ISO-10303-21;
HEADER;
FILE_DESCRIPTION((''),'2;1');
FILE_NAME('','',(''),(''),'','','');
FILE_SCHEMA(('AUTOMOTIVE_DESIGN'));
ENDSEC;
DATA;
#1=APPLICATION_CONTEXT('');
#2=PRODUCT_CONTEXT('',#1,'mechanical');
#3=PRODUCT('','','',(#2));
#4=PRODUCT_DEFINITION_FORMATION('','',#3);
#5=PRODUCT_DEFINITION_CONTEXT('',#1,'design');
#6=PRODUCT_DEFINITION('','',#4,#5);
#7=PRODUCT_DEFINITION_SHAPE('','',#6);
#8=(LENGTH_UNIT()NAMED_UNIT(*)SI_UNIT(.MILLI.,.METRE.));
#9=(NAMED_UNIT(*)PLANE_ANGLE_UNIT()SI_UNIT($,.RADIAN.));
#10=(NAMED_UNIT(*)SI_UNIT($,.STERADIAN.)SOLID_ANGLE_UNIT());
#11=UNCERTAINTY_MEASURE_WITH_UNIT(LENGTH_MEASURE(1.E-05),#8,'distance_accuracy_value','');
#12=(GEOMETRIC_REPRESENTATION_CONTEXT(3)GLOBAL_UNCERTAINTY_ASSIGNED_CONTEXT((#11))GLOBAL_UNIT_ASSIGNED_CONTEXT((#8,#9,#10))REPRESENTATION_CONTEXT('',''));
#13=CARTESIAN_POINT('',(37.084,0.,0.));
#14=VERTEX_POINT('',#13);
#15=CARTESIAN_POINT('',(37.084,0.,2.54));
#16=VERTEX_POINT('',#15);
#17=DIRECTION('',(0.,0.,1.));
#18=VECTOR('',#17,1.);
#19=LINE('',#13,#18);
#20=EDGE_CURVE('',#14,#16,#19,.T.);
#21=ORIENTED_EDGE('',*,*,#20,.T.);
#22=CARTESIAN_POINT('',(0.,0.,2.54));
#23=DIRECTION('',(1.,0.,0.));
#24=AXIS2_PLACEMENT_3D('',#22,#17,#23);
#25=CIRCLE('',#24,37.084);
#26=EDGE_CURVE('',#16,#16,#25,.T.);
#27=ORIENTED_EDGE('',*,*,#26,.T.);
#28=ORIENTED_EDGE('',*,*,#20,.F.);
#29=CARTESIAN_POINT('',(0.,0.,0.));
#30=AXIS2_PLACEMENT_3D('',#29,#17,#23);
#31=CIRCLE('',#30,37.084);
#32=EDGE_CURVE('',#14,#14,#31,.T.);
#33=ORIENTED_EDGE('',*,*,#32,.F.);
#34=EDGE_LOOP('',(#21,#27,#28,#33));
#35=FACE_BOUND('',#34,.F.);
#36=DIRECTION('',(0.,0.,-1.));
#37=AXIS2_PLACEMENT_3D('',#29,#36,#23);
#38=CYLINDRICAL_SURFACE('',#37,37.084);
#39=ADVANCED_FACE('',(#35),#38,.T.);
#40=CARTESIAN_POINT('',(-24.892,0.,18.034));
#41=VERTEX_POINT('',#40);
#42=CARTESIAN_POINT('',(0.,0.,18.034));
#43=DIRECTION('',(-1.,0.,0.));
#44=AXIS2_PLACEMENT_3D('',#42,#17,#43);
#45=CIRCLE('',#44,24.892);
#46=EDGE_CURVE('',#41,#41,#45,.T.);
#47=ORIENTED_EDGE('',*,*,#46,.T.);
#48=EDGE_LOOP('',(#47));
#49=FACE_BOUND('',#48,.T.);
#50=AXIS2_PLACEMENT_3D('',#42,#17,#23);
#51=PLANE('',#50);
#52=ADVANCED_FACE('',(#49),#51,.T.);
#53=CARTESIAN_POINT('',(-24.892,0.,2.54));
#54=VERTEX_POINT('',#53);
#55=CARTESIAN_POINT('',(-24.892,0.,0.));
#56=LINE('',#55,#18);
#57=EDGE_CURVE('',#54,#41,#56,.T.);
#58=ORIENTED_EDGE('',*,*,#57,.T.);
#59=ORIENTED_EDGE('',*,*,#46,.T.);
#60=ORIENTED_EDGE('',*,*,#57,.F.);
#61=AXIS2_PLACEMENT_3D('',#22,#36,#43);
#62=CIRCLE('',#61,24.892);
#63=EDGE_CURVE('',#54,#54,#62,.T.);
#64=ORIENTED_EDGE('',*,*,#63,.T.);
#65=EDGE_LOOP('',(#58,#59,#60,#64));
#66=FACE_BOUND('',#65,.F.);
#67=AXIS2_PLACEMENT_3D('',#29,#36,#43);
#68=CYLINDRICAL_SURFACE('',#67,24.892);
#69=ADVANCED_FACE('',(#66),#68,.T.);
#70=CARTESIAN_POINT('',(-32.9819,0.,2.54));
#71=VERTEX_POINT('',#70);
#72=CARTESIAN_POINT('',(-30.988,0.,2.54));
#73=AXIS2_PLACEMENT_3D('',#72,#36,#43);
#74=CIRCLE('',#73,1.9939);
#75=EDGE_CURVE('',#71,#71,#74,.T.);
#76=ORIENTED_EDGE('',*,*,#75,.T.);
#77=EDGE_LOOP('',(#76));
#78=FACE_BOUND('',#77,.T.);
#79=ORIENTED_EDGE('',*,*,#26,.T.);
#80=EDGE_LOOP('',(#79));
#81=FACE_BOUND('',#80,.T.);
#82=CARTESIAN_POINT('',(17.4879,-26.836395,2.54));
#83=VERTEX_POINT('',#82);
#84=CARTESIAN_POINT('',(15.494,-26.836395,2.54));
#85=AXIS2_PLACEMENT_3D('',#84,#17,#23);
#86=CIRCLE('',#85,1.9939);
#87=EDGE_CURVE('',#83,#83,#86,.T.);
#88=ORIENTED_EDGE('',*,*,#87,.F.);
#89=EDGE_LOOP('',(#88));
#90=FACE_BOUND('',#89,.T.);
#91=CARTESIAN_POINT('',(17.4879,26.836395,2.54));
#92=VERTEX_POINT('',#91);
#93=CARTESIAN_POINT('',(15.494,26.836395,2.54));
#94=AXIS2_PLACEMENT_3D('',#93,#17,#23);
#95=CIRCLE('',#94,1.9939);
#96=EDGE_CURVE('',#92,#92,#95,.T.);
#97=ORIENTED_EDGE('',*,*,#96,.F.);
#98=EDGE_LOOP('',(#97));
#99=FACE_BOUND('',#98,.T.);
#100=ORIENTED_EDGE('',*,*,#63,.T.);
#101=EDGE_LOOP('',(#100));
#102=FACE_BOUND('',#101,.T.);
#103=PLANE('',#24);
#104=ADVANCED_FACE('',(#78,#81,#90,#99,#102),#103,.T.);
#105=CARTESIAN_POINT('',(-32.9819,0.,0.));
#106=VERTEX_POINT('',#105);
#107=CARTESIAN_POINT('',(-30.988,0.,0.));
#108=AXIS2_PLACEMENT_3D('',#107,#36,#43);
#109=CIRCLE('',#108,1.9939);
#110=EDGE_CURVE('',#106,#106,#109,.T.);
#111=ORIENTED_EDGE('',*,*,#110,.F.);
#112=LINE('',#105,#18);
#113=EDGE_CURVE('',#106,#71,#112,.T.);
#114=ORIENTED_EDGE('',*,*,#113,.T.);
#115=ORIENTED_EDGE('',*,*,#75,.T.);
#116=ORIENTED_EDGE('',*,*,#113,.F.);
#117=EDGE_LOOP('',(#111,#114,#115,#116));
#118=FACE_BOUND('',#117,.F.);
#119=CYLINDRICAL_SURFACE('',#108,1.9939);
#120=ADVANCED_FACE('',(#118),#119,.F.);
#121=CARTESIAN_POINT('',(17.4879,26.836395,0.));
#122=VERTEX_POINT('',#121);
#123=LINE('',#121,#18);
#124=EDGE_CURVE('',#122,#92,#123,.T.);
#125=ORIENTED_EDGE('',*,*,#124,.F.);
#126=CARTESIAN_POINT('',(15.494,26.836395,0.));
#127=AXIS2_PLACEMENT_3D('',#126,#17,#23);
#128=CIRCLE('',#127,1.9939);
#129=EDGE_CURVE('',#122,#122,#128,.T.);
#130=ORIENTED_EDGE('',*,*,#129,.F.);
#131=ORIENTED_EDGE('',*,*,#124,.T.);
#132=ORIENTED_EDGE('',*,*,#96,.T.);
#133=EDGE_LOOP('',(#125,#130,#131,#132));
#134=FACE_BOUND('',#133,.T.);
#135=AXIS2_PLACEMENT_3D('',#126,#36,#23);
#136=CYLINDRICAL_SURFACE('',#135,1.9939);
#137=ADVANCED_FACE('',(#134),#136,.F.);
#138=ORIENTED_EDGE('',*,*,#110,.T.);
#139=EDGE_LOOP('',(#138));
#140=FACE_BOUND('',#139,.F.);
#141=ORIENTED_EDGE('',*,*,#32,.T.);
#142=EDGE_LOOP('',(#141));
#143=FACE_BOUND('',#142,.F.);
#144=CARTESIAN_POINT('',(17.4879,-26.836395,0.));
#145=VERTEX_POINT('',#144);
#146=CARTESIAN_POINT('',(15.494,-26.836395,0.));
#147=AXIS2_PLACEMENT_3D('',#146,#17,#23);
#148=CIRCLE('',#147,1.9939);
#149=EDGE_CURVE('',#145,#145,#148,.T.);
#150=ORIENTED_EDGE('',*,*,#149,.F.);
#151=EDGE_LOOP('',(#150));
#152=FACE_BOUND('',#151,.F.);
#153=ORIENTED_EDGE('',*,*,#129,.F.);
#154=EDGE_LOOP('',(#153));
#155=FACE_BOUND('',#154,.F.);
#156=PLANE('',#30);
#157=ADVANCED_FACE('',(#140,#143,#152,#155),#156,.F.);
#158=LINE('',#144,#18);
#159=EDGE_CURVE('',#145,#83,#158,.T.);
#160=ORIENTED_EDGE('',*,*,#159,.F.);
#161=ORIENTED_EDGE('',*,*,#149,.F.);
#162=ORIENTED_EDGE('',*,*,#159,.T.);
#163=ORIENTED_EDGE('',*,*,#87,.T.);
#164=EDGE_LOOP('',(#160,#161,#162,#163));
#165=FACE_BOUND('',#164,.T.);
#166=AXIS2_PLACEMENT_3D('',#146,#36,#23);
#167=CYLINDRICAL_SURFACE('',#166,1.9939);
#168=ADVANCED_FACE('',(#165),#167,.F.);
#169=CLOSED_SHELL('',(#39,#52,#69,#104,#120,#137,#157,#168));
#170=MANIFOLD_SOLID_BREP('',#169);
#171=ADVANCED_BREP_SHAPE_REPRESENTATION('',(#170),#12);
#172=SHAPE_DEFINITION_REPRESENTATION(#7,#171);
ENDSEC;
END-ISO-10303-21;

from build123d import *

# Parameters (mm, degrees)
F1_DEPTH = 18.034
F0_R     = 1.9939
F2_DEPTH = 2.54


# Not quite as in the source:
# - a feature names something its author has since deleted; it is built from what else it names


with BuildPart() as f1:
    # F0 (on Top) → F1 (new body)
    with BuildSketch(Plane.XY):
        with BuildLine():
            ThreePointArc((24.892, 0), (0, 24.892), (-24.892, 0))
            ThreePointArc((-24.892, 0), (0, -24.892), (24.892, 0))
        make_face()
    extrude(amount=F1_DEPTH)

    # F0 (on Top) → F2 (join)
    with BuildSketch(Plane.XY):
        with BuildLine():
            ThreePointArc((-37.084, 0), (0, -37.084), (37.084, 0))
            ThreePointArc((37.084, 0), (0, 37.084), (-37.084, 0))
        make_face()
        with Locations((15.494, -26.8363952125)):
            Circle(F0_R, mode=Mode.SUBTRACT)
        with BuildLine():
            ThreePointArc((-28.9941, 0), (-30.988, -1.9939), (-32.9819, 0))
            ThreePointArc((-32.9819, 0), (-30.988, 1.9939), (-28.9941, 0))
        make_face(mode=Mode.SUBTRACT)
        with BuildLine():
            ThreePointArc((24.892, 0), (0, -24.892), (-24.892, 0))
            ThreePointArc((-24.892, 0), (0, 24.892), (24.892, 0))
        make_face(mode=Mode.SUBTRACT)
        with Locations((15.494, 26.8363952125)):
            Circle(F0_R, mode=Mode.SUBTRACT)
    extrude(amount=F2_DEPTH)


solid = f1.part
